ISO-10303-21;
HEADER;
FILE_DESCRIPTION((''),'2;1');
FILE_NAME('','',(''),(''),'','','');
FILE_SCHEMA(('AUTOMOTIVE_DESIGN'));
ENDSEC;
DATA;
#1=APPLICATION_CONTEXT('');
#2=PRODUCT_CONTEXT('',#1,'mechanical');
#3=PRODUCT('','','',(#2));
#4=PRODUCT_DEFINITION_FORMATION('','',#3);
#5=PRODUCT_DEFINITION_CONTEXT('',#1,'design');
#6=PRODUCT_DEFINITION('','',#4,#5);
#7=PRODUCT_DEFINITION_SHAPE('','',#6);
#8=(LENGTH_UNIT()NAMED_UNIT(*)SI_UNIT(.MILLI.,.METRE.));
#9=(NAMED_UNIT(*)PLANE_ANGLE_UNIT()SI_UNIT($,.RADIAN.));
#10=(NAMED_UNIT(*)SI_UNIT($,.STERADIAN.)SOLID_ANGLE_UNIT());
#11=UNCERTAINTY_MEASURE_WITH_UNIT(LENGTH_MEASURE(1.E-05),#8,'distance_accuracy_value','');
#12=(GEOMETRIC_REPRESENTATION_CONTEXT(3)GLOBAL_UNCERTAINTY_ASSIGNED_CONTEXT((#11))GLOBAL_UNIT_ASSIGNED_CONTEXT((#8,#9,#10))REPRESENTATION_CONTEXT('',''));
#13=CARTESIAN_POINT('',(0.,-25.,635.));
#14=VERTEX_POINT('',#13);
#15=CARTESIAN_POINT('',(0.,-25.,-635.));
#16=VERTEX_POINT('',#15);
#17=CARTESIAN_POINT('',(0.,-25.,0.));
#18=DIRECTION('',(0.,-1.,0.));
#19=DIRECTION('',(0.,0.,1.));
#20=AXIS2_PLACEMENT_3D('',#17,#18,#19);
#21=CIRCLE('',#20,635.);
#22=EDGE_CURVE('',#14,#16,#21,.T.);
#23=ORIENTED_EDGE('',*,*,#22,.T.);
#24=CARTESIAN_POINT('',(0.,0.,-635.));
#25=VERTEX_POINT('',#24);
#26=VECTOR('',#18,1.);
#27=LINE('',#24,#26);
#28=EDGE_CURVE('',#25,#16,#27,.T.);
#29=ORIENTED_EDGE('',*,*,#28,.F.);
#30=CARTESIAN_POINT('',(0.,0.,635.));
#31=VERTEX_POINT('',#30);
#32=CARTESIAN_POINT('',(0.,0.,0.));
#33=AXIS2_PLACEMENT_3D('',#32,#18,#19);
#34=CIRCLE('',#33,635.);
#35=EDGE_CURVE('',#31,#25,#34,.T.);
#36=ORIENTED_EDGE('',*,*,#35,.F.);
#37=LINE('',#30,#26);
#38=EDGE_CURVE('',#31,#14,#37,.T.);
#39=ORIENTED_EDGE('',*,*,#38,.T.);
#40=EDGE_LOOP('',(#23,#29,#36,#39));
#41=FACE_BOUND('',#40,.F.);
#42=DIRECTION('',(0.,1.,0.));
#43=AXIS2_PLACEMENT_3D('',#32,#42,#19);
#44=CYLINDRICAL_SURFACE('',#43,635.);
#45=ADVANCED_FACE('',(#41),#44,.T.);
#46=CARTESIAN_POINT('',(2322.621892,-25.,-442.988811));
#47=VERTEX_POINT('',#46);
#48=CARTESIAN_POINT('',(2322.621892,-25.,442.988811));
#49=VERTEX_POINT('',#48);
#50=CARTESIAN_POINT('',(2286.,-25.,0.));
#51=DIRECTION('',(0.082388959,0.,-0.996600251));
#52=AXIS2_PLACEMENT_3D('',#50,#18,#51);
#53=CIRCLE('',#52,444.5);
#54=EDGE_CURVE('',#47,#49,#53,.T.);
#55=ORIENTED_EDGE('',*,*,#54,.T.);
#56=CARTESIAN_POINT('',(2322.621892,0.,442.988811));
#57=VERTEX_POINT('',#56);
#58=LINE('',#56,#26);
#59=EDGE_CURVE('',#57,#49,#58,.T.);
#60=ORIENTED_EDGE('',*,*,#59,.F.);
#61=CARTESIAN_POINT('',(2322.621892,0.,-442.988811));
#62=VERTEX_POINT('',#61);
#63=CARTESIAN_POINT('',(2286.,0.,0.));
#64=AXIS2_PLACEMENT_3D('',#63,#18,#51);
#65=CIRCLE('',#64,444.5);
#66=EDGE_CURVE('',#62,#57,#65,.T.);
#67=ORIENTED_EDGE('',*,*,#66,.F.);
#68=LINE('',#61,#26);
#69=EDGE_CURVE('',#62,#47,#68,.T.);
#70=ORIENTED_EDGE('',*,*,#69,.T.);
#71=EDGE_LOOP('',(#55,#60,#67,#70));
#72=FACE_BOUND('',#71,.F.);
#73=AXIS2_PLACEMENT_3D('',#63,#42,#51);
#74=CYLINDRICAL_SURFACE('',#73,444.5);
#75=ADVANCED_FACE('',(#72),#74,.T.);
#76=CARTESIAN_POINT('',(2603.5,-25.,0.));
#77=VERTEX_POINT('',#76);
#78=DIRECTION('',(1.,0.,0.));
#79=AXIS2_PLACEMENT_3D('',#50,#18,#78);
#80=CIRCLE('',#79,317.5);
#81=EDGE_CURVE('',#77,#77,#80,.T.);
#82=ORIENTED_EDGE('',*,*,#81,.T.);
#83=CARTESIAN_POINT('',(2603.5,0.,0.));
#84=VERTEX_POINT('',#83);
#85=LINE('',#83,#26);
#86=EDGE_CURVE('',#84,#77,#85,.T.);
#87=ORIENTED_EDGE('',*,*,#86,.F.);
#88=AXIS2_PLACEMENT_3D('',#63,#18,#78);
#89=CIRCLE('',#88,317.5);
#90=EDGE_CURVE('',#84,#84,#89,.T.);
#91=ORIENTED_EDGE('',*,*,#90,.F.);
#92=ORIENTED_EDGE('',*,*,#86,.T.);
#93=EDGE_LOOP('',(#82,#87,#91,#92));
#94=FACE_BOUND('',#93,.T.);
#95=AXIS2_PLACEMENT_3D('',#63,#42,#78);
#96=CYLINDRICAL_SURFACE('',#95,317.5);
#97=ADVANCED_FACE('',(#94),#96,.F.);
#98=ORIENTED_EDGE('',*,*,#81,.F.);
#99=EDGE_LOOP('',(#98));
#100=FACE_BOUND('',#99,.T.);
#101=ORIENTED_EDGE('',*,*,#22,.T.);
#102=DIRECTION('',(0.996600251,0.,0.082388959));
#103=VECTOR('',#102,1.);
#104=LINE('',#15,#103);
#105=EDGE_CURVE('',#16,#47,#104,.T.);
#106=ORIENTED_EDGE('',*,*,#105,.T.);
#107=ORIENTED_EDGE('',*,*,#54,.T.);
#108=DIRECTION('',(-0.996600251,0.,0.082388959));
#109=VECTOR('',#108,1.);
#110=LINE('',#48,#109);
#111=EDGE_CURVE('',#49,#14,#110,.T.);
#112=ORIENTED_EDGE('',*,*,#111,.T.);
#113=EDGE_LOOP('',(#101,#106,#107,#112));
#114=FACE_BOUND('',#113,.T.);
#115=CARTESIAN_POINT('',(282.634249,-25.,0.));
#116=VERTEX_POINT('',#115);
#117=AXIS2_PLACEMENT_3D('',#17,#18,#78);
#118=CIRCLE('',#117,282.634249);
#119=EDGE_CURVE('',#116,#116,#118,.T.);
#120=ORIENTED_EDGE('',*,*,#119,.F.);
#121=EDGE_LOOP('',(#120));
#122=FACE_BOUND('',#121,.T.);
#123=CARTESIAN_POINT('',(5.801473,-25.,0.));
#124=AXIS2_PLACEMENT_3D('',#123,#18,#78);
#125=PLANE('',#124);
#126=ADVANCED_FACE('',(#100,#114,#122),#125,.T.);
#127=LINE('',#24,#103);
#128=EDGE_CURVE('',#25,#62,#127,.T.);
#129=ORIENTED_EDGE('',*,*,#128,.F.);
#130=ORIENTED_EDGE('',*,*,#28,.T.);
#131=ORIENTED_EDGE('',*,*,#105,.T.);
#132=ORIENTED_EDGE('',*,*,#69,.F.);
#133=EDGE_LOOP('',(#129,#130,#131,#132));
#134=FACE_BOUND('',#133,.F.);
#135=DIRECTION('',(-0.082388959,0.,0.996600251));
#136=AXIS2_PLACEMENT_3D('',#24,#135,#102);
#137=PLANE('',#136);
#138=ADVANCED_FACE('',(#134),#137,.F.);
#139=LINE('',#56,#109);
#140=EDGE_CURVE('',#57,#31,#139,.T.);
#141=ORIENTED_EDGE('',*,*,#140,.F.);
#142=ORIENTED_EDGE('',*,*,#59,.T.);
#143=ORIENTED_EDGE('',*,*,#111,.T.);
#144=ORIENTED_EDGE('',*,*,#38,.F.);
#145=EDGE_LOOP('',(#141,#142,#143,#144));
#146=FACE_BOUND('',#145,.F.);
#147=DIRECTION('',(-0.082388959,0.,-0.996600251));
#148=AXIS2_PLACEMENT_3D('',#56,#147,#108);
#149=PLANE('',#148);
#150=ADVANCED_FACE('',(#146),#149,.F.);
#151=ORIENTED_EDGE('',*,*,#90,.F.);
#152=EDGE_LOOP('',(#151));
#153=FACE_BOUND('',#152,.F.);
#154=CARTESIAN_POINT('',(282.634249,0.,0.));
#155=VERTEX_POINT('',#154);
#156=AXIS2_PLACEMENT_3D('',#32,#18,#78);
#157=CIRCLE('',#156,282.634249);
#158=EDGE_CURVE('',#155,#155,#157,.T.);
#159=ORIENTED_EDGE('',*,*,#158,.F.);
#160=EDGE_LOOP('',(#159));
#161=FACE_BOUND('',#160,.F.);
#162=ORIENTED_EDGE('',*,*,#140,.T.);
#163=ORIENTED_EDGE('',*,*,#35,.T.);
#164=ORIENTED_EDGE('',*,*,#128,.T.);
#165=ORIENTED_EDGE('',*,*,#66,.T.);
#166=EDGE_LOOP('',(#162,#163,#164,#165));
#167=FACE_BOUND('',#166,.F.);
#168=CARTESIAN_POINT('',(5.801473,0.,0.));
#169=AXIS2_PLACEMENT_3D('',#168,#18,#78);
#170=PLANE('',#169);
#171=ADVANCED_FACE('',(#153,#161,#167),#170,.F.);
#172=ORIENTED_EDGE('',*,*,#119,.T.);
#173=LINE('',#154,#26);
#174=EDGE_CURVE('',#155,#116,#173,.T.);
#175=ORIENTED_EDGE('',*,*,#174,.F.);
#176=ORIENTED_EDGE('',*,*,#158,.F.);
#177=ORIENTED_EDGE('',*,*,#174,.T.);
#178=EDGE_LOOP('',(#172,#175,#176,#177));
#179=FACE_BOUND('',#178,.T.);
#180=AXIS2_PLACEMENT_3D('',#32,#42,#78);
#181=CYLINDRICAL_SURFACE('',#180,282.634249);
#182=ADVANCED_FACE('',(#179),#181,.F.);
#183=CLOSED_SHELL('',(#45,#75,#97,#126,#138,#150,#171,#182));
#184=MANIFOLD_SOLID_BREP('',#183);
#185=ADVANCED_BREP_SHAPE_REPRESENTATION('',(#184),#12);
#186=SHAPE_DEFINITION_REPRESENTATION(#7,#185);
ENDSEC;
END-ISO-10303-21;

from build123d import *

# Parameters (mm, degrees)
F0_R     = 282.6342486107
F0_R_2   = 317.5
F1_DEPTH = 25


with BuildPart() as f1:
    # F0 (on Front) → F1 (new body)
    with BuildSketch(Plane.XZ):
        with BuildLine():
            Line((104.2782479982, 626.3793155863), (0, 635))
            ThreePointArc((0, 635), (-635, 0), (0, -635))
            Line((0, -635), (104.2782479982, -626.3793155863))
            ThreePointArc((104.2782479982, -626.3793155863), (484.4799724854, -410.492577595), (635, 0))
            ThreePointArc((635, 0), (484.4799724854, 410.492577595), (104.2782479982, 626.3793155863))
        make_face()
        Circle(F0_R, mode=Mode.SUBTRACT)
        with BuildLine():
            Line((2322.6218920545, 442.9888113963), (104.2782479982, 626.3793155863))
            ThreePointArc((104.2782479982, 626.3793155863), (484.4799724854, 410.492577595), (635, 0))
            ThreePointArc((635, 0), (484.4799724854, -410.492577595), (104.2782479982, -626.3793155863))
            Line((104.2782479982, -626.3793155863), (2322.6218920545, -442.9888113963))
            ThreePointArc((2322.6218920545, -442.9888113963), (1841.5, 0), (2322.6218920545, 442.9888113963))
        make_face()
        with BuildLine():
            ThreePointArc((2730.5, 0), (2613.0005206557, 301.0828947165), (2322.6218920545, 442.9888113963))
            ThreePointArc((2322.6218920545, 442.9888113963), (1841.5, 0), (2322.6218920545, -442.9888113963))
            ThreePointArc((2322.6218920545, -442.9888113963), (2613.0005206557, -301.0828947165), (2730.5, 0))
        make_face()
        with Locations((2286, 0)):
            Circle(F0_R_2, mode=Mode.SUBTRACT)
    extrude(amount=F1_DEPTH)


solid = f1.part
